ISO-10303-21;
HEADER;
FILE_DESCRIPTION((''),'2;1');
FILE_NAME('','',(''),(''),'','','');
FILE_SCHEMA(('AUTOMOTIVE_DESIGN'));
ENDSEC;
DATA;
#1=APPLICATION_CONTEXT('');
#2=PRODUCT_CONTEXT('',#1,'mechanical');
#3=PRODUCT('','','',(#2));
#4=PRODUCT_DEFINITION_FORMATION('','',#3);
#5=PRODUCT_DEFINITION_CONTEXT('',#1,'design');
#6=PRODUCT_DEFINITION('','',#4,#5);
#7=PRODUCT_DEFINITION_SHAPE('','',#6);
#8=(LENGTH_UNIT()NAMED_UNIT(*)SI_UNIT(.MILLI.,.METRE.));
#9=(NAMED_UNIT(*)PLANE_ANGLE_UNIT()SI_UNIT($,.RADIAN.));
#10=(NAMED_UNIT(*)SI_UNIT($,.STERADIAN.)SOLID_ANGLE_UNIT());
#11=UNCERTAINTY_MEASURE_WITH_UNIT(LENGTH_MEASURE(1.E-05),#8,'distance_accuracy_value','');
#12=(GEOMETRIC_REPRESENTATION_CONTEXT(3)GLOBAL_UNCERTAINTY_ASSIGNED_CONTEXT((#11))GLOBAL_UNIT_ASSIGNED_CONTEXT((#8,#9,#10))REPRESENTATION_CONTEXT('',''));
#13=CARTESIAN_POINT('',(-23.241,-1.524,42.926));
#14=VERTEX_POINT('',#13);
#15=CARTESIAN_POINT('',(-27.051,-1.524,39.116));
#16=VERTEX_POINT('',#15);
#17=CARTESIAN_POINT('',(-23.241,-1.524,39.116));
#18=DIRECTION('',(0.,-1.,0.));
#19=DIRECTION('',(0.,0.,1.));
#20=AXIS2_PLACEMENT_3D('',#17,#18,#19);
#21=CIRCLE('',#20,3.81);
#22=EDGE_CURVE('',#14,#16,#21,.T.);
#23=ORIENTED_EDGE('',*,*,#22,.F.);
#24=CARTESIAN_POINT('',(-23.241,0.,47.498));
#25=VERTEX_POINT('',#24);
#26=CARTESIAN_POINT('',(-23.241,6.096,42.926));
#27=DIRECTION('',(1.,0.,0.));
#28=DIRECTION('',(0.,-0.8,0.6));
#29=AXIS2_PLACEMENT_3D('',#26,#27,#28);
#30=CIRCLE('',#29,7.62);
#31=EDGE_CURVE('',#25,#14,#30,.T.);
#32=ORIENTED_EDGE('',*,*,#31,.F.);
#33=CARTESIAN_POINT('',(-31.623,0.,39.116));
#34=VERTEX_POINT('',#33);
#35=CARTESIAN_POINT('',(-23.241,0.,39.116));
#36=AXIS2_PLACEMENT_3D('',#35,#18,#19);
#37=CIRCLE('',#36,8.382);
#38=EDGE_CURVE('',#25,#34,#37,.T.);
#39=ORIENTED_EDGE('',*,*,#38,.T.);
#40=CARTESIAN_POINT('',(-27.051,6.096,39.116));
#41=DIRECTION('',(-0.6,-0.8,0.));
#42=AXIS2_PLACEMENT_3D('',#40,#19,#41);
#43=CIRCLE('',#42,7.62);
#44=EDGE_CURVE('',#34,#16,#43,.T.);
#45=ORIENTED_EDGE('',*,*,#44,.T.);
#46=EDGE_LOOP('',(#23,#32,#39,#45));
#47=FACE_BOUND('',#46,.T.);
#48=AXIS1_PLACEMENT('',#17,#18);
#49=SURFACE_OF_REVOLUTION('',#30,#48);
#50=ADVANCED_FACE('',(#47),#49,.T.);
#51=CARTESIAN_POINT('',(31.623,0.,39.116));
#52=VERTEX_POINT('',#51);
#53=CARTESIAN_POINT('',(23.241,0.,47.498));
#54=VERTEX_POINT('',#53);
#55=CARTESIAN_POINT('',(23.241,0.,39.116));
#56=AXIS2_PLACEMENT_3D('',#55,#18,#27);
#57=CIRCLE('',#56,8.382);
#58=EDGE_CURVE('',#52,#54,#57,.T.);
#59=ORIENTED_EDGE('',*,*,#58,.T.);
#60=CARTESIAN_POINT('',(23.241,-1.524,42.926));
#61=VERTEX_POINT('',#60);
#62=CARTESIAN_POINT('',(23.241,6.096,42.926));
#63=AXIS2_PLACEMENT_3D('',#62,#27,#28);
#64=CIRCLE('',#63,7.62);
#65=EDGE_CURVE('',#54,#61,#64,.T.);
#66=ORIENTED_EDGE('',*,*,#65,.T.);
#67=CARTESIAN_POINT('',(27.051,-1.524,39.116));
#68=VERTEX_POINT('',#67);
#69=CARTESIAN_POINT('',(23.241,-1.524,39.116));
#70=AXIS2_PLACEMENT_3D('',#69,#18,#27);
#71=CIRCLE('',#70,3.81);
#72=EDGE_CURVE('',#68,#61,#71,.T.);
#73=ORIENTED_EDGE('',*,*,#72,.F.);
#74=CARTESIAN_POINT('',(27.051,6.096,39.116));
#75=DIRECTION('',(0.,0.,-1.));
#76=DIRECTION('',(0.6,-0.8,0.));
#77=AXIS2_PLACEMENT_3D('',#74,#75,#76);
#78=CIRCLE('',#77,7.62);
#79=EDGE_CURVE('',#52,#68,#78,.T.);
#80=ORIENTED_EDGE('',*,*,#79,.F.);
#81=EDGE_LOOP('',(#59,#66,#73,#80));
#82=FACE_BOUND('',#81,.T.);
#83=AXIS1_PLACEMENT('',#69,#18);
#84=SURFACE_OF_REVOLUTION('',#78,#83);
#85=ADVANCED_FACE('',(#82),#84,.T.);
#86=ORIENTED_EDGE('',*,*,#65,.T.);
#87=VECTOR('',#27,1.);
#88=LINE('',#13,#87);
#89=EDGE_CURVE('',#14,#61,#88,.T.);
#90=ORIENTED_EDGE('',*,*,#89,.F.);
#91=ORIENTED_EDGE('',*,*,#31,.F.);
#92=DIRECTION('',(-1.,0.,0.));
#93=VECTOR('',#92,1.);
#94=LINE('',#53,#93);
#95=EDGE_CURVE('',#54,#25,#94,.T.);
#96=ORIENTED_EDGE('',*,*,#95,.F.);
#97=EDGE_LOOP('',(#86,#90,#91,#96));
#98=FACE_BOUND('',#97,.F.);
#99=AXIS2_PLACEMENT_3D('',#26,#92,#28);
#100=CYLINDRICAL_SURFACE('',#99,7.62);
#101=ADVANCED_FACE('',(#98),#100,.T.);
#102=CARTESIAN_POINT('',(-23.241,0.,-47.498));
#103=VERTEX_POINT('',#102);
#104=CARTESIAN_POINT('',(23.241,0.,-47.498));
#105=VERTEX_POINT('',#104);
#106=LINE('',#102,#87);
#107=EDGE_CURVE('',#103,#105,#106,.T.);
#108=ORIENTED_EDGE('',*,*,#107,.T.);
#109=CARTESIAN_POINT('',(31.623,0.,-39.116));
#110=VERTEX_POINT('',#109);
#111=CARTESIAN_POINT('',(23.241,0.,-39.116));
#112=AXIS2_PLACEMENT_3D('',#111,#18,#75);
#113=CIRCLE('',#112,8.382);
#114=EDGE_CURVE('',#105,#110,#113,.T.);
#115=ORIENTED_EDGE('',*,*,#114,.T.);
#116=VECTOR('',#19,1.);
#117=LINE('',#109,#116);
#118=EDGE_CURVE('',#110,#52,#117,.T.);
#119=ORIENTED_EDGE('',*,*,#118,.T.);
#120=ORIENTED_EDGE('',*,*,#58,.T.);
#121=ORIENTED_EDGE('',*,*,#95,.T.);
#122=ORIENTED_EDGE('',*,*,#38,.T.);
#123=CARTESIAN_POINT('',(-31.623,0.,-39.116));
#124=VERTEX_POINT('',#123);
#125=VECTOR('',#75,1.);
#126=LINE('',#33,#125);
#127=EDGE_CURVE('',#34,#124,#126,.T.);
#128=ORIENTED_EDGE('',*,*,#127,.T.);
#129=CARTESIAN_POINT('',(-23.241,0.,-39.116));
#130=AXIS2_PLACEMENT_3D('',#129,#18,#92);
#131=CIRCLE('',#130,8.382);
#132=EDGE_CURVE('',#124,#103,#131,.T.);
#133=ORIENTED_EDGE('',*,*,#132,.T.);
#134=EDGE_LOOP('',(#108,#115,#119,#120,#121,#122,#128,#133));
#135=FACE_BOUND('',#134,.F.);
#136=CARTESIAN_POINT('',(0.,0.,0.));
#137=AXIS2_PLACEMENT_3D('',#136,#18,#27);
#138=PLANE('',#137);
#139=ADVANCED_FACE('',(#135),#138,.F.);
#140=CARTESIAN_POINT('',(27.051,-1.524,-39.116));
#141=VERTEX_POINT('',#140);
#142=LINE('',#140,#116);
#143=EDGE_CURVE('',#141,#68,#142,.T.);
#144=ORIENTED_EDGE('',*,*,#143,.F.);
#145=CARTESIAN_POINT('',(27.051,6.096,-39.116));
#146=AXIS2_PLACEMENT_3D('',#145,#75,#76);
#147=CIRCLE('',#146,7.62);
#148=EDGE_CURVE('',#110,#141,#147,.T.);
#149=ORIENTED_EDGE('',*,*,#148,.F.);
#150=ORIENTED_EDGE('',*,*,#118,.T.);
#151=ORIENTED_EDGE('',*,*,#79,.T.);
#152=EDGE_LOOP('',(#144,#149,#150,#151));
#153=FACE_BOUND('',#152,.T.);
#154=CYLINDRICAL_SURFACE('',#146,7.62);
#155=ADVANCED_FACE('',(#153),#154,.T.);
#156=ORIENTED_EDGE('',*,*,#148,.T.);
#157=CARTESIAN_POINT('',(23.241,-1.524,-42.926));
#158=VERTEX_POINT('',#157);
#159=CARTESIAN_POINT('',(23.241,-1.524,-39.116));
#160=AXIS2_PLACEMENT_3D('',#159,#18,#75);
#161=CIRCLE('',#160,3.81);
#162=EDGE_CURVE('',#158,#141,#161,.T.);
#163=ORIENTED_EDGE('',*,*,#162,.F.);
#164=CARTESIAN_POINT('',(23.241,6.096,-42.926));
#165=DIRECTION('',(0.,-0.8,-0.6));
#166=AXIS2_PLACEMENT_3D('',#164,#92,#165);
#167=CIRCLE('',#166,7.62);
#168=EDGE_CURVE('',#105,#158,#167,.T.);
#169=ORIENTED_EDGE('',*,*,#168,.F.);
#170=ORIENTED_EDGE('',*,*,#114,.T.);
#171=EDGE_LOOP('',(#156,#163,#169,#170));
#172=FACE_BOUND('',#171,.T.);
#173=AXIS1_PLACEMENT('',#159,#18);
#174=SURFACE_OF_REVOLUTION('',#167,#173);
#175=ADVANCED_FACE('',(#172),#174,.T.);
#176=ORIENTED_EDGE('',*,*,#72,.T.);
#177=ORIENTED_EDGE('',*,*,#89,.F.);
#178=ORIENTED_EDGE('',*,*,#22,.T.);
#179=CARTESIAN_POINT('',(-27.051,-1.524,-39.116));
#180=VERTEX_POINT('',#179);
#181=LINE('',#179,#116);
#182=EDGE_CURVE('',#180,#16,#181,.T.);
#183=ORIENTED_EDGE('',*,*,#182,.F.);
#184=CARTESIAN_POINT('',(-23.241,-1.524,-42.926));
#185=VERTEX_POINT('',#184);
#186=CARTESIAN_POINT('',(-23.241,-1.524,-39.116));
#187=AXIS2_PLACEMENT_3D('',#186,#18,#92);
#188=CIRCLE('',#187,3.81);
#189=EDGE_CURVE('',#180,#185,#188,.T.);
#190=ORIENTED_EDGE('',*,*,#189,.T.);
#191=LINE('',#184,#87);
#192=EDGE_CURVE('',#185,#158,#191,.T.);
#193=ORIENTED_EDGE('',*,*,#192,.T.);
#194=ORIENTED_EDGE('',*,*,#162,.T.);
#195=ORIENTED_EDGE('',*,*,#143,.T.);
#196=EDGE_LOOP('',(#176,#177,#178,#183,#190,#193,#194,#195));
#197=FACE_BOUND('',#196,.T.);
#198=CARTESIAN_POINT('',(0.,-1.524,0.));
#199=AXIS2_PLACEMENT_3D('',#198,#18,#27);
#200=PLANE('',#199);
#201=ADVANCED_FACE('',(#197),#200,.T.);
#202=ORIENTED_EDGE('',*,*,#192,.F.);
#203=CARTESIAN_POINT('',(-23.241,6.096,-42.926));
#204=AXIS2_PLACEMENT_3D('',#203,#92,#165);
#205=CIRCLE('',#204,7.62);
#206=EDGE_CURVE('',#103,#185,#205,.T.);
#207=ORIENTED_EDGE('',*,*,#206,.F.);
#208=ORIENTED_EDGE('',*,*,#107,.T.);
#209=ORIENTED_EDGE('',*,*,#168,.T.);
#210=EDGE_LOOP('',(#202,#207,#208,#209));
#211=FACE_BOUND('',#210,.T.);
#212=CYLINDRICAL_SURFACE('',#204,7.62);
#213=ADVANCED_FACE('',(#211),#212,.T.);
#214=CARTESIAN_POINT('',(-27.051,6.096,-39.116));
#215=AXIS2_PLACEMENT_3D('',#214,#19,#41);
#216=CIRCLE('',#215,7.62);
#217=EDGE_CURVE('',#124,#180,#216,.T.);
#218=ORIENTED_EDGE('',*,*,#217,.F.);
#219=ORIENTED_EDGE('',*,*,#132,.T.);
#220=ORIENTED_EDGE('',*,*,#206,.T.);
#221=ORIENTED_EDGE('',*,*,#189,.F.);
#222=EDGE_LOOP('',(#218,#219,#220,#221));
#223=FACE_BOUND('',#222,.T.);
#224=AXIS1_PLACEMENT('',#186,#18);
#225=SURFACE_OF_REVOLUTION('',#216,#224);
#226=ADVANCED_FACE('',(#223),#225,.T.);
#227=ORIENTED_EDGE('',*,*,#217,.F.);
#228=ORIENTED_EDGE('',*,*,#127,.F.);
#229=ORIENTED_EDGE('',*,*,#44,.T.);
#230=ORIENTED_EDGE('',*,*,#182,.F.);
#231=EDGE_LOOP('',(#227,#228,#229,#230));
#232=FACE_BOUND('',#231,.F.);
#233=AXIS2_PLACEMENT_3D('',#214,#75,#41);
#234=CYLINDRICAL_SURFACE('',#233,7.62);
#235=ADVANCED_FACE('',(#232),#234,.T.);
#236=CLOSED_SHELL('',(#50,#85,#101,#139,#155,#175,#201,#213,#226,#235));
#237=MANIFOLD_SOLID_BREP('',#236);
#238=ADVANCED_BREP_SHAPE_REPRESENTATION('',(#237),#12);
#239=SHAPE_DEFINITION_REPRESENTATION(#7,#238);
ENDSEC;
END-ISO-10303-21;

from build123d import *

# Parameters (mm, degrees)
F1_DEPTH     = 1.524
F2_T1_DEPTH  = 78.232
F2_T3_DEPTH  = 46.482
F2_T6_ANGLE  = 90
F2_T8_ANGLE  = 90
F2_T10_ANGLE = 90
F2_T12_ANGLE = 90


# Not quite as in the source:
# - a fillet or chamfer that OpenCascade refuses, or shapes differently, is made with other operations: its cross-section is extruded or revolved along the edge and cut away or added


with BuildPart() as f1:
    # F0 (on Front) → F1 (new body)
    with BuildSketch(Plane.XZ):
        with BuildLine():
            Line((-23.241, -47.498), (23.241, -47.498))
            ThreePointArc((23.241, -47.498), (29.1679690399, -45.0429690399), (31.623, -39.116))
            Line((31.623, -39.116), (31.623, 39.116))
            ThreePointArc((31.623, 39.116), (29.1679690399, 45.0429690399), (23.241, 47.498))
            Line((23.241, 47.498), (-23.241, 47.498))
            ThreePointArc((-23.241, 47.498), (-29.1679690399, 45.0429690399), (-31.623, 39.116))
            Line((-31.623, 39.116), (-31.623, -39.116))
            ThreePointArc((-31.623, -39.116), (-29.1679690399, -45.0429690399), (-23.241, -47.498))
        make_face()
    extrude(amount=F1_DEPTH)

    # F2: fillet of radius 7.62 on 1 edges, made by hand

    # F2_s2 → F2_t1 (cut)
    with BuildSketch(Plane.XY.offset(-39.116)):
        with BuildLine():
            ThreePointArc((-31.623, 0), (-29.460655577, -1.1329667311), (-27.051, -1.524))
            Line((-27.051, -1.524), (-31.623, -1.524))
            Line((-31.623, -1.524), (-31.623, 0))
        make_face()
        with BuildLine():
            ThreePointArc((31.623, 0), (29.460655577, -1.1329667311), (27.051, -1.524))
            Line((27.051, -1.524), (31.623, -1.524))
            Line((31.623, -1.524), (31.623, 0))
        make_face()
    extrude(amount=F2_T1_DEPTH, mode=Mode.SUBTRACT)

    # F2_s4 → F2_t3 (cut)
    with BuildSketch(Plane.YZ.offset(-23.241)):
        with BuildLine():
            ThreePointArc((0, -47.498), (-1.1329667311, -45.335655577), (-1.524, -42.926))
            Line((-1.524, -42.926), (-1.524, -47.498))
            Line((-1.524, -47.498), (0, -47.498))
        make_face()
        with BuildLine():
            ThreePointArc((0, 47.498), (-1.1329667311, 45.335655577), (-1.524, 42.926))
            Line((-1.524, 42.926), (-1.524, 47.498))
            Line((-1.524, 47.498), (0, 47.498))
        make_face()
    extrude(amount=F2_T3_DEPTH, mode=Mode.SUBTRACT)

    # F2_s5 → F2_t6 (revolve, cut)
    with BuildSketch(Plane.YZ.offset(-23.241)):
        with BuildLine():
            ThreePointArc((0, 47.498), (-1.1329667311, 45.335655577), (-1.524, 42.926))
            Line((-1.524, 42.926), (-1.524, 47.498))
            Line((-1.524, 47.498), (0, 47.498))
        make_face()
    revolve(axis=Axis((-23.241, -1.524, 39.116), (0, -1, 0)), revolution_arc=F2_T6_ANGLE, mode=Mode.SUBTRACT)

    # F2_s7 → F2_t8 (revolve, cut)
    with BuildSketch(Plane.XY.offset(-39.116)):
        with BuildLine():
            ThreePointArc((-31.623, 0), (-29.460655577, -1.1329667311), (-27.051, -1.524))
            Line((-27.051, -1.524), (-31.623, -1.524))
            Line((-31.623, -1.524), (-31.623, 0))
        make_face()
    revolve(axis=Axis((-23.241, -1.524, -39.116), (0, -1, 0)), revolution_arc=F2_T8_ANGLE, mode=Mode.SUBTRACT)

    # F2_s9 → F2_t10 (revolve, cut)
    with BuildSketch(Plane.YZ.offset(23.241)):
        with BuildLine():
            ThreePointArc((0, -47.498), (-1.1329667311, -45.335655577), (-1.524, -42.926))
            Line((-1.524, -42.926), (-1.524, -47.498))
            Line((-1.524, -47.498), (0, -47.498))
        make_face()
    revolve(axis=Axis((23.241, -1.524, -39.116), (0, -1, 0)), revolution_arc=F2_T10_ANGLE, mode=Mode.SUBTRACT)

    # F2_s11 → F2_t12 (revolve, cut)
    with BuildSketch(Plane.XY.offset(39.116)):
        with BuildLine():
            ThreePointArc((31.623, 0), (29.460655577, -1.1329667311), (27.051, -1.524))
            Line((27.051, -1.524), (31.623, -1.524))
            Line((31.623, -1.524), (31.623, 0))
        make_face()
    revolve(axis=Axis((23.241, -1.524, 39.116), (0, -1, 0)), revolution_arc=F2_T12_ANGLE, mode=Mode.SUBTRACT)


solid = f1.part
